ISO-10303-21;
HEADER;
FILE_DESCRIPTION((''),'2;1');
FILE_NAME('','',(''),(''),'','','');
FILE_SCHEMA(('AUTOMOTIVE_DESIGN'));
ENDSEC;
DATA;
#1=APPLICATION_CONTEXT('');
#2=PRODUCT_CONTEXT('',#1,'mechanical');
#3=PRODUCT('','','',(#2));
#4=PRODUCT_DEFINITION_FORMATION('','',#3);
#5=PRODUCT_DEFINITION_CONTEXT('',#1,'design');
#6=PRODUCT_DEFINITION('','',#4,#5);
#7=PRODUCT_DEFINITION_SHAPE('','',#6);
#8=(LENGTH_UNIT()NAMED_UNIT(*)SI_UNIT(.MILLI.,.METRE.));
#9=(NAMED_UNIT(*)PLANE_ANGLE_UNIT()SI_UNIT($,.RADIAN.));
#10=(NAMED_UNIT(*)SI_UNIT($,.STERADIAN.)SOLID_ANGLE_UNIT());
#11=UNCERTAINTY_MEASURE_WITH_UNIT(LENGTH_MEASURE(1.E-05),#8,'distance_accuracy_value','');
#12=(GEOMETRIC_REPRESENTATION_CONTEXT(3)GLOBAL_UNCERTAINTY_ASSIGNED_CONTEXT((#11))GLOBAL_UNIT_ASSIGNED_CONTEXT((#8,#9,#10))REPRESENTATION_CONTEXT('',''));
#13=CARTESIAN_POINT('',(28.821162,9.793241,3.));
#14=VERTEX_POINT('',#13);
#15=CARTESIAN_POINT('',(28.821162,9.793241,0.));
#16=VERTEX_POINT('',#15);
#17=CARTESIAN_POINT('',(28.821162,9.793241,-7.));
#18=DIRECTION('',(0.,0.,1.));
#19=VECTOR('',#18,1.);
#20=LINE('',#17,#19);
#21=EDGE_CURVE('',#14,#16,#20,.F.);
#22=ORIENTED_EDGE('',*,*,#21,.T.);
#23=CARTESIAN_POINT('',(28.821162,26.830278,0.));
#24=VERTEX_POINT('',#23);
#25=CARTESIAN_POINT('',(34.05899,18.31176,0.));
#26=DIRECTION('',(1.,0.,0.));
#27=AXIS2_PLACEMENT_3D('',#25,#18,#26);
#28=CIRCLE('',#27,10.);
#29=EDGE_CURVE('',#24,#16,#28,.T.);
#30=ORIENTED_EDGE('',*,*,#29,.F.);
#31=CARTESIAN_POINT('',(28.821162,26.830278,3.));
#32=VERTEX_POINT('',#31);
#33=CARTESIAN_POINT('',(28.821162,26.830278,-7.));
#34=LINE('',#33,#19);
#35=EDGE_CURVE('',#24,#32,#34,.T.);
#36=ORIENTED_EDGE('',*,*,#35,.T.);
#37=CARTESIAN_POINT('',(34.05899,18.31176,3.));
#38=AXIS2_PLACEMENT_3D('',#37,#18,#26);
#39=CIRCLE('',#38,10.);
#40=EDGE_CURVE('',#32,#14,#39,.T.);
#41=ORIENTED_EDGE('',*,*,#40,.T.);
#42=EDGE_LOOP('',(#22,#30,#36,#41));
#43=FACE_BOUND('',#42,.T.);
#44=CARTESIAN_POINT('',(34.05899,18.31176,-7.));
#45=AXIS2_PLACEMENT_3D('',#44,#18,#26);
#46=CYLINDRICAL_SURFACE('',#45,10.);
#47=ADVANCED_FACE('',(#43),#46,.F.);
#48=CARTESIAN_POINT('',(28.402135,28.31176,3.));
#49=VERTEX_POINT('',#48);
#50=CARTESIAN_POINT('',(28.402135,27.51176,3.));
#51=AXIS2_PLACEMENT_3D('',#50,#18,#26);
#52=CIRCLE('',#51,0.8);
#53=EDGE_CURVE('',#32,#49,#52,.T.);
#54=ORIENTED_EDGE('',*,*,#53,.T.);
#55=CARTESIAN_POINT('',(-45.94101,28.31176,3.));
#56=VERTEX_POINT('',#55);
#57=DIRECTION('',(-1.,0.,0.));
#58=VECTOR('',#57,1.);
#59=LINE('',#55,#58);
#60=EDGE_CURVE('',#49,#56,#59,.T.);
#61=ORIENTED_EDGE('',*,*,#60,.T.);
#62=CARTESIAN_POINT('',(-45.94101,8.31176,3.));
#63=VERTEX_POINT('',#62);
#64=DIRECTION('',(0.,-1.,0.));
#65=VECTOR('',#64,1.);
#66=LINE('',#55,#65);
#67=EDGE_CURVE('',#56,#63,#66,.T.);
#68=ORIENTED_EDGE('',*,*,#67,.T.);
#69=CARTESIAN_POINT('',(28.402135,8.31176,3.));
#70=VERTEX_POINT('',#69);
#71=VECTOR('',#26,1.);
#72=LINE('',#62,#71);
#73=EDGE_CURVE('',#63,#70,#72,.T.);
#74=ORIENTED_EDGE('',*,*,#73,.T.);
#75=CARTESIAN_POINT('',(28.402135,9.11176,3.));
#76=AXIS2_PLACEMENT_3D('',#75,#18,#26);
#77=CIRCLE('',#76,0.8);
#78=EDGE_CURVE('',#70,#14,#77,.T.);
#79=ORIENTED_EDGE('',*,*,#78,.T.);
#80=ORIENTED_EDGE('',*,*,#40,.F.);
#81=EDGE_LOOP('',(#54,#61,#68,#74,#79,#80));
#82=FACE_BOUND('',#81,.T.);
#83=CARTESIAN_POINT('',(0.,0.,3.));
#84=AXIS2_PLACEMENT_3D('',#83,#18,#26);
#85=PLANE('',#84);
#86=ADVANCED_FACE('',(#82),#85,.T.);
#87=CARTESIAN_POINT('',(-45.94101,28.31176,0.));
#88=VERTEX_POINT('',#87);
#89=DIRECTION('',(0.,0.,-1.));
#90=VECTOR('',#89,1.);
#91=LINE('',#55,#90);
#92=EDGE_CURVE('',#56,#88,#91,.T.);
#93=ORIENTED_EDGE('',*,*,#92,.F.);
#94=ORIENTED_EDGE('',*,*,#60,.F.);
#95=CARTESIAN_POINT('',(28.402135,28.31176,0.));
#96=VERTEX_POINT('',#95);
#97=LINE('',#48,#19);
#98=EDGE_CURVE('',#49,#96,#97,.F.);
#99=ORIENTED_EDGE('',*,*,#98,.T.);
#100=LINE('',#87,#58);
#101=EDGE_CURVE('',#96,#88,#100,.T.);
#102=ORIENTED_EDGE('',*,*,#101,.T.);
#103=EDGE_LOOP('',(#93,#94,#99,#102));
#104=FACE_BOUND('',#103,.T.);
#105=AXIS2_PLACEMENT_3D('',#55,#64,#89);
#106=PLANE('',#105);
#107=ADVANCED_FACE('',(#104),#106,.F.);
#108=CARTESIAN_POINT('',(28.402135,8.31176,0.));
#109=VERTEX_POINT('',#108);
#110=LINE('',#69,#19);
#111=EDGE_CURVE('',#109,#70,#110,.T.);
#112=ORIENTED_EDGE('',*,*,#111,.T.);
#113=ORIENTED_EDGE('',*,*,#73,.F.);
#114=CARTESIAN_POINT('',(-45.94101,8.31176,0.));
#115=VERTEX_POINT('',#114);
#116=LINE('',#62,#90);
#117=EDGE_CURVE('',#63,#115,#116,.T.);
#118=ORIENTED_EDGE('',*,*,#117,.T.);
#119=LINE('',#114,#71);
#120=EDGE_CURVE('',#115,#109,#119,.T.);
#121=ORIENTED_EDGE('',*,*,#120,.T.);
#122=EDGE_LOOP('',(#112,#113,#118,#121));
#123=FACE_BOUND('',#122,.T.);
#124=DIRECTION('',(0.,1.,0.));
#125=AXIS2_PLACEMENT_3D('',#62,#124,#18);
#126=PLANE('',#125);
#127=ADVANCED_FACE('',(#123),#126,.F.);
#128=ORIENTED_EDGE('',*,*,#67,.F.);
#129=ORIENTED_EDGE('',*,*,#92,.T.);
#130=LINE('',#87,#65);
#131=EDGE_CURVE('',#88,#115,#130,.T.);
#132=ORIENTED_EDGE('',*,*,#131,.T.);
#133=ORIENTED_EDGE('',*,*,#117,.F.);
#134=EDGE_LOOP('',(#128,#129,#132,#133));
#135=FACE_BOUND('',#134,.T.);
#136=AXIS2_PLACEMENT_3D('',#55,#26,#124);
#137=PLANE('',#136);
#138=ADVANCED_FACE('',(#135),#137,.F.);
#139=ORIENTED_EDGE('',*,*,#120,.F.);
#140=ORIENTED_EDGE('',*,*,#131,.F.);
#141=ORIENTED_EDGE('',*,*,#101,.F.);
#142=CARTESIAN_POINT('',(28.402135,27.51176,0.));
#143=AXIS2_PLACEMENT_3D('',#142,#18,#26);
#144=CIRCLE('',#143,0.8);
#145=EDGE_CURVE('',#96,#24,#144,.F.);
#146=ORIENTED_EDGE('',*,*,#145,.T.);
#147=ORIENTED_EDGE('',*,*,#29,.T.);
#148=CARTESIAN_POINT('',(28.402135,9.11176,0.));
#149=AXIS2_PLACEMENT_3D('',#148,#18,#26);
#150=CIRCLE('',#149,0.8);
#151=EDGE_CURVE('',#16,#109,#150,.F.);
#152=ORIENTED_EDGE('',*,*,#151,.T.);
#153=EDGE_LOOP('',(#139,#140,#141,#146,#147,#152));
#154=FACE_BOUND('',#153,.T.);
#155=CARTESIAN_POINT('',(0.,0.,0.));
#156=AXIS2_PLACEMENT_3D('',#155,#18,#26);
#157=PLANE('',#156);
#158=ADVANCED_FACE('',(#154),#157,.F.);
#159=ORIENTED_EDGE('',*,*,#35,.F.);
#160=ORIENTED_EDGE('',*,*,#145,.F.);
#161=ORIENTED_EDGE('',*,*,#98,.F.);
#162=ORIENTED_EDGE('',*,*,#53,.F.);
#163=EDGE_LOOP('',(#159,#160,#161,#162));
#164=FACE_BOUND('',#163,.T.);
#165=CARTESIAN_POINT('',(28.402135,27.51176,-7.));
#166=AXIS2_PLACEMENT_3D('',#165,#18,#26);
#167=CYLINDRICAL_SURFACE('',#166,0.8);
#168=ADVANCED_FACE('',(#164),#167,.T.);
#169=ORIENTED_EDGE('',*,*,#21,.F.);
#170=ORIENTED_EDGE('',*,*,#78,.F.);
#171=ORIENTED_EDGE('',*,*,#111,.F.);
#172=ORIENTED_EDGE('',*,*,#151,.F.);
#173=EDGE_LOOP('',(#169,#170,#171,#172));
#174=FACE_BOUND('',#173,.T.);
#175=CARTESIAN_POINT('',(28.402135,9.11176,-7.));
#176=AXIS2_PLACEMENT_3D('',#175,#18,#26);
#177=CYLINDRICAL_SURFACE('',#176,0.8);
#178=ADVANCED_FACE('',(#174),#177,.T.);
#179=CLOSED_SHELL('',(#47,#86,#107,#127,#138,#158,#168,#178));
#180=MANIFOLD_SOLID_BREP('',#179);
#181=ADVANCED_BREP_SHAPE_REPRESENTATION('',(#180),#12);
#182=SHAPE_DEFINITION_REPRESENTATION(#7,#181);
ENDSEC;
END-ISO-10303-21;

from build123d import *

# Parameters (mm, degrees)
ESBO_O1_W                = 80
ESBO_O1_H                = 20
RESSALTO_EXTRUS_O1_DEPTH = 3
ESBO_O2_R                = 10
CORTE_EXTRUS_O1_DEPTH    = 10
FILETE1_R                = 0.8
FILETE2_R                = 0.8


with BuildPart() as part:
    # Esboço1 → Ressalto-extrusão1 (new body)
    with BuildSketch(Plane.XY):
        with Locations((-5.941010257, 18.311759729)):
            Rectangle(ESBO_O1_W, ESBO_O1_H)
    extrude(amount=RESSALTO_EXTRUS_O1_DEPTH)

    # Esboço2 → Corte-extrusão1 (cut)
    with BuildSketch(Plane.XY.offset(3)):
        with Locations((34.058989743, 18.311759729)):
            Circle(ESBO_O2_R)
    extrude(amount=-CORTE_EXTRUS_O1_DEPTH, mode=Mode.SUBTRACT)

    # Filete1
    filete1_edges = [part.edges().sort_by_distance(p)[0] for p in [
        (34.058989743, 28.311759729, 1.5),
    ]]
    fillet(filete1_edges, radius=FILETE1_R)

    # Filete2
    # the kernel refuses this fillet: 0.8 mm, written as the material it takes off along each edge
    with BuildSketch(Plane(origin=(34.058989743, 8.311759729, -14.142135624), x_dir=(-0.9622504486493761, 0.2721655269759089, 0), z_dir=(0, 0, 1))) as filete2_piece_1:
        with BuildLine():
            CenterArc((5.661042961, 0.769800359), FILETE2_R, 105.793169048, 148.413661903)
            Line((5.44331054, 1.539600718), (0, 0))
            ThreePointArc((0, 0), (2.72165527, 0.377495514), (5.44331054, 0))
        make_face()
    extrude(amount=31.284271247, mode=Mode.SUBTRACT)


solid = part.part
